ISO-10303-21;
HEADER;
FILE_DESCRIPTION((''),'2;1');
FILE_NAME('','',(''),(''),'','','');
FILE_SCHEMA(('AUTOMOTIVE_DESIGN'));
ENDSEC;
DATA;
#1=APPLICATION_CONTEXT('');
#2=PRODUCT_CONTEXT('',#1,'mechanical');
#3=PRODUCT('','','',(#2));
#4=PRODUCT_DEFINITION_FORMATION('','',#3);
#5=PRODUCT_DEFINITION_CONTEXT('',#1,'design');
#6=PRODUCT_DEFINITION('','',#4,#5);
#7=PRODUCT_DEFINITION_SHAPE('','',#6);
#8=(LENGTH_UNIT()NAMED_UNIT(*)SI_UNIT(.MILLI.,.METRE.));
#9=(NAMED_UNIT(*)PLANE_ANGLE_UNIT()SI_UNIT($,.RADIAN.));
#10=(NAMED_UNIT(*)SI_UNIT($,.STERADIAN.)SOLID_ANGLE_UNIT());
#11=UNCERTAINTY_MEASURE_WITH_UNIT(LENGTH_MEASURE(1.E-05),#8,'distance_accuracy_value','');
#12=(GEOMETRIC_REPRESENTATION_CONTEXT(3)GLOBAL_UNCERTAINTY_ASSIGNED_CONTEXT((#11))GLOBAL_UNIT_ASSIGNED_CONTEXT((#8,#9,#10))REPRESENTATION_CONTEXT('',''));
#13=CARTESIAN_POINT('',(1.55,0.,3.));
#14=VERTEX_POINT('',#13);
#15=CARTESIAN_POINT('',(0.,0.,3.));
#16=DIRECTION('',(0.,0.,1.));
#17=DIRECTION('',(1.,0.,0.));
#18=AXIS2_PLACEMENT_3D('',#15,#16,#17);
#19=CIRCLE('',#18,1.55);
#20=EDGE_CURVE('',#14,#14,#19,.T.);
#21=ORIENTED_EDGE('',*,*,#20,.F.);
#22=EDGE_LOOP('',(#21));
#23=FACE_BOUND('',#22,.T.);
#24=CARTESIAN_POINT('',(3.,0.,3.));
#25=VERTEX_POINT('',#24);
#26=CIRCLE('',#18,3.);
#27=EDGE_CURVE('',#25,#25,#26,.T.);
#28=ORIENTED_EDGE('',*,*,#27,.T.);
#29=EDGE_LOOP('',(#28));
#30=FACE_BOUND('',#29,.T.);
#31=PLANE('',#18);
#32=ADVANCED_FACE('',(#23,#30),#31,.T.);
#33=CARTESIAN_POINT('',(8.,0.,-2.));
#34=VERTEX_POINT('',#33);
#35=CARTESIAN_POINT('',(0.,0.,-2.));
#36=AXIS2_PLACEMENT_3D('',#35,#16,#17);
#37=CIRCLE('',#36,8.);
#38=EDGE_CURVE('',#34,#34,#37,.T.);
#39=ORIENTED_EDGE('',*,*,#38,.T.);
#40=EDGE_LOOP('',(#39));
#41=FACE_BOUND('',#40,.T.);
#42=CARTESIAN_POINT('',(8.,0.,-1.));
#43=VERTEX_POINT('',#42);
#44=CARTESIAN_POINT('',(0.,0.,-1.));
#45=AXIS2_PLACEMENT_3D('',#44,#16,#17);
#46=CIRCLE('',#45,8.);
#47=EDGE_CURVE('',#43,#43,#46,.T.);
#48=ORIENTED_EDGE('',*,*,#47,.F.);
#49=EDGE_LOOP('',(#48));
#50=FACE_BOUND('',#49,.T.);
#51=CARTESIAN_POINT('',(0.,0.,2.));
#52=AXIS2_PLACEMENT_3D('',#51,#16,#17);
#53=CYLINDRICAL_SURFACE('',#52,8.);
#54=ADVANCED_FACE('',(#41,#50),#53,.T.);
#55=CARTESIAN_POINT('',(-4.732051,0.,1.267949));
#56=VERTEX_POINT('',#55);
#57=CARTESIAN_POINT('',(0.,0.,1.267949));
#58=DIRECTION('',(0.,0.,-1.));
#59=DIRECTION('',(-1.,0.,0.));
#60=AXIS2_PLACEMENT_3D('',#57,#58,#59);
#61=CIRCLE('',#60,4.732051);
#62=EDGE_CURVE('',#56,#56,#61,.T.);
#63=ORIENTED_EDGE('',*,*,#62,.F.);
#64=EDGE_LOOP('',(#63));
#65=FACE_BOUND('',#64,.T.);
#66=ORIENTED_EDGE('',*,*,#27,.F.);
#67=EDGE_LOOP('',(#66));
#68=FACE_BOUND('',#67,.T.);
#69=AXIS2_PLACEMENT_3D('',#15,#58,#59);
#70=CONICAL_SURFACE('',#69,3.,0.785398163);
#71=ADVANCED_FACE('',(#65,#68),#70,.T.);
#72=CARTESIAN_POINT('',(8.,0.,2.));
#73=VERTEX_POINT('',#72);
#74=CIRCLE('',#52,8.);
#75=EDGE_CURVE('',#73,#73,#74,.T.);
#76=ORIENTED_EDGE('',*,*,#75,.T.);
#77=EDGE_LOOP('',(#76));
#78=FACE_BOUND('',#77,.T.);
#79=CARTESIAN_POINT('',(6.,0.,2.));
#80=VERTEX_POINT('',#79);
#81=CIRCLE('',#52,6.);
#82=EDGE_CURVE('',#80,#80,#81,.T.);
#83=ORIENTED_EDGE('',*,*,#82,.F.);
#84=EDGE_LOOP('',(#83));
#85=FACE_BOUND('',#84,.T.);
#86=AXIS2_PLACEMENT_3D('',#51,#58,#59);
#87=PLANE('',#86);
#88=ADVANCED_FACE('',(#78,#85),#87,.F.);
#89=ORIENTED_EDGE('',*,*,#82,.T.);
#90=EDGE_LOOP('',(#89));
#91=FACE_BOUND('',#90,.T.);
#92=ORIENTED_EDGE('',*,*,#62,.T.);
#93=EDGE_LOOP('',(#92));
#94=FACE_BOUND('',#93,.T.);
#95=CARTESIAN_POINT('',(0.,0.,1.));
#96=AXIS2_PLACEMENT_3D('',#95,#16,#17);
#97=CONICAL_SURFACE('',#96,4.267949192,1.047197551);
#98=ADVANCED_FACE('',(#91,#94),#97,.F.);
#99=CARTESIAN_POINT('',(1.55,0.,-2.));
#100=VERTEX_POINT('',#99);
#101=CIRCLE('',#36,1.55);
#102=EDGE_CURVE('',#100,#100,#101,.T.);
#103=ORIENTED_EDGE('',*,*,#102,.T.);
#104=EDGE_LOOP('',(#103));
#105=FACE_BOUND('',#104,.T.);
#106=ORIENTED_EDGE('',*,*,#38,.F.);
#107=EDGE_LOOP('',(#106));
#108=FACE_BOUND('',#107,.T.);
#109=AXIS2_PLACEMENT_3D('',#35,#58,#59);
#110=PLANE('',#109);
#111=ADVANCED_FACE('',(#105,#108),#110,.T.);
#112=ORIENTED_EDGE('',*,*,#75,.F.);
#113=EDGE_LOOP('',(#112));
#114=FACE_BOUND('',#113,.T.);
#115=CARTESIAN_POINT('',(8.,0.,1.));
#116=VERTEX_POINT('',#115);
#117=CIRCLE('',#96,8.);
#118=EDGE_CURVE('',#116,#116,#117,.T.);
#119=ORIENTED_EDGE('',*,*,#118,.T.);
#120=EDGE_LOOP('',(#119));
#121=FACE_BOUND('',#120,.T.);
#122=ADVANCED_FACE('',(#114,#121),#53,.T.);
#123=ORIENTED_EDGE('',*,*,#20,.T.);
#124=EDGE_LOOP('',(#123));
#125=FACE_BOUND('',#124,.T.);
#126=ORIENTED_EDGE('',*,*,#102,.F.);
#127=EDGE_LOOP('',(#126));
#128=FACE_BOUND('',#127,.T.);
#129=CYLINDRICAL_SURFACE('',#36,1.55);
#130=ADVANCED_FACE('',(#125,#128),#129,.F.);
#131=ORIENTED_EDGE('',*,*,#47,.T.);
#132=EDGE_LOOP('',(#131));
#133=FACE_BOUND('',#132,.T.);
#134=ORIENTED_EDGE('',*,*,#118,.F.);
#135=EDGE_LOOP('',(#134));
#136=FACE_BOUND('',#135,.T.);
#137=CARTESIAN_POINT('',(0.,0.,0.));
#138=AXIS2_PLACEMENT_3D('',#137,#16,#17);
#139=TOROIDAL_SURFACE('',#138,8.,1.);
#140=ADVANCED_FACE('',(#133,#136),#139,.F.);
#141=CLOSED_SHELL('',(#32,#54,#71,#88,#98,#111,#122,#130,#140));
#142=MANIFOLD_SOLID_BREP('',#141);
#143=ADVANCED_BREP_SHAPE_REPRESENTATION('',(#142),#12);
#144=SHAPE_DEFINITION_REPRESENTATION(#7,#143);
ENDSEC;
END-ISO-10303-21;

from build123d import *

# Parameters (mm, degrees)
SKETCH2_W          = 3
SKETCH2_H          = 1
SKETCH3_R          = 1.55
CUT_EXTRUDE1_DEPTH = 13.369316877
CHAMFER1_SIZE      = 2


with BuildPart() as part:
    # Sketch2 → Revolve1 (revolve)
    with BuildSketch(Plane(origin=(0, 0, 0), x_dir=(1, 0, 0), z_dir=(0, 1, 0))):
        with Locations((1.5, -2.5)):
            Rectangle(SKETCH2_W, SKETCH2_H)
        with BuildLine():
            Line((0, 2), (0, -2))
            Line((0, -2), (3, -2))
            Line((3, -2), (3, -1))
            Line((3, -1), (4.267949192, -1))
            Line((4.267949192, -1), (6, -2))
            Line((6, -2), (8, -2))
            Line((8, -2), (8, -1))
            ThreePointArc((8, -1), (7, 0), (8, 1))
            Line((8, 1), (8, 2))
            Line((8, 2), (0, 2))
        make_face()
    revolve(axis=Axis((0, 0, 2), (0, 0, -1)))

    # Sketch3 → Cut-Extrude1 (cut, through all)
    with BuildSketch(Plane.XY.offset(3)):
        Circle(SKETCH3_R)
    extrude(amount=-CUT_EXTRUDE1_DEPTH, mode=Mode.SUBTRACT)

    # Chamfer1
    # the kernel refuses this chamfer: 2 mm, written as the material it adds along each edge
    with BuildSketch(Plane(origin=(0, 0, 1), x_dir=(1, 0, 0), z_dir=(0, 1, 0))) as chamfer1_piece_1_section:
        Polygon((3, -CHAMFER1_SIZE), (3 + CHAMFER1_SIZE, 0), (3, 0), align=None)
    chamfer1_piece_1 = revolve(axis=Axis((0, 0, 1), (0, 0, -1)), mode=Mode.PRIVATE)
    chamfer1_piece_1 = split(chamfer1_piece_1, bisect_by=Plane(origin=(-4.002141123, 0, 3), z_dir=(0, 0, -1)), keep=Keep.TOP, mode=Mode.PRIVATE)
    add(chamfer1_piece_1)


solid = part.part
